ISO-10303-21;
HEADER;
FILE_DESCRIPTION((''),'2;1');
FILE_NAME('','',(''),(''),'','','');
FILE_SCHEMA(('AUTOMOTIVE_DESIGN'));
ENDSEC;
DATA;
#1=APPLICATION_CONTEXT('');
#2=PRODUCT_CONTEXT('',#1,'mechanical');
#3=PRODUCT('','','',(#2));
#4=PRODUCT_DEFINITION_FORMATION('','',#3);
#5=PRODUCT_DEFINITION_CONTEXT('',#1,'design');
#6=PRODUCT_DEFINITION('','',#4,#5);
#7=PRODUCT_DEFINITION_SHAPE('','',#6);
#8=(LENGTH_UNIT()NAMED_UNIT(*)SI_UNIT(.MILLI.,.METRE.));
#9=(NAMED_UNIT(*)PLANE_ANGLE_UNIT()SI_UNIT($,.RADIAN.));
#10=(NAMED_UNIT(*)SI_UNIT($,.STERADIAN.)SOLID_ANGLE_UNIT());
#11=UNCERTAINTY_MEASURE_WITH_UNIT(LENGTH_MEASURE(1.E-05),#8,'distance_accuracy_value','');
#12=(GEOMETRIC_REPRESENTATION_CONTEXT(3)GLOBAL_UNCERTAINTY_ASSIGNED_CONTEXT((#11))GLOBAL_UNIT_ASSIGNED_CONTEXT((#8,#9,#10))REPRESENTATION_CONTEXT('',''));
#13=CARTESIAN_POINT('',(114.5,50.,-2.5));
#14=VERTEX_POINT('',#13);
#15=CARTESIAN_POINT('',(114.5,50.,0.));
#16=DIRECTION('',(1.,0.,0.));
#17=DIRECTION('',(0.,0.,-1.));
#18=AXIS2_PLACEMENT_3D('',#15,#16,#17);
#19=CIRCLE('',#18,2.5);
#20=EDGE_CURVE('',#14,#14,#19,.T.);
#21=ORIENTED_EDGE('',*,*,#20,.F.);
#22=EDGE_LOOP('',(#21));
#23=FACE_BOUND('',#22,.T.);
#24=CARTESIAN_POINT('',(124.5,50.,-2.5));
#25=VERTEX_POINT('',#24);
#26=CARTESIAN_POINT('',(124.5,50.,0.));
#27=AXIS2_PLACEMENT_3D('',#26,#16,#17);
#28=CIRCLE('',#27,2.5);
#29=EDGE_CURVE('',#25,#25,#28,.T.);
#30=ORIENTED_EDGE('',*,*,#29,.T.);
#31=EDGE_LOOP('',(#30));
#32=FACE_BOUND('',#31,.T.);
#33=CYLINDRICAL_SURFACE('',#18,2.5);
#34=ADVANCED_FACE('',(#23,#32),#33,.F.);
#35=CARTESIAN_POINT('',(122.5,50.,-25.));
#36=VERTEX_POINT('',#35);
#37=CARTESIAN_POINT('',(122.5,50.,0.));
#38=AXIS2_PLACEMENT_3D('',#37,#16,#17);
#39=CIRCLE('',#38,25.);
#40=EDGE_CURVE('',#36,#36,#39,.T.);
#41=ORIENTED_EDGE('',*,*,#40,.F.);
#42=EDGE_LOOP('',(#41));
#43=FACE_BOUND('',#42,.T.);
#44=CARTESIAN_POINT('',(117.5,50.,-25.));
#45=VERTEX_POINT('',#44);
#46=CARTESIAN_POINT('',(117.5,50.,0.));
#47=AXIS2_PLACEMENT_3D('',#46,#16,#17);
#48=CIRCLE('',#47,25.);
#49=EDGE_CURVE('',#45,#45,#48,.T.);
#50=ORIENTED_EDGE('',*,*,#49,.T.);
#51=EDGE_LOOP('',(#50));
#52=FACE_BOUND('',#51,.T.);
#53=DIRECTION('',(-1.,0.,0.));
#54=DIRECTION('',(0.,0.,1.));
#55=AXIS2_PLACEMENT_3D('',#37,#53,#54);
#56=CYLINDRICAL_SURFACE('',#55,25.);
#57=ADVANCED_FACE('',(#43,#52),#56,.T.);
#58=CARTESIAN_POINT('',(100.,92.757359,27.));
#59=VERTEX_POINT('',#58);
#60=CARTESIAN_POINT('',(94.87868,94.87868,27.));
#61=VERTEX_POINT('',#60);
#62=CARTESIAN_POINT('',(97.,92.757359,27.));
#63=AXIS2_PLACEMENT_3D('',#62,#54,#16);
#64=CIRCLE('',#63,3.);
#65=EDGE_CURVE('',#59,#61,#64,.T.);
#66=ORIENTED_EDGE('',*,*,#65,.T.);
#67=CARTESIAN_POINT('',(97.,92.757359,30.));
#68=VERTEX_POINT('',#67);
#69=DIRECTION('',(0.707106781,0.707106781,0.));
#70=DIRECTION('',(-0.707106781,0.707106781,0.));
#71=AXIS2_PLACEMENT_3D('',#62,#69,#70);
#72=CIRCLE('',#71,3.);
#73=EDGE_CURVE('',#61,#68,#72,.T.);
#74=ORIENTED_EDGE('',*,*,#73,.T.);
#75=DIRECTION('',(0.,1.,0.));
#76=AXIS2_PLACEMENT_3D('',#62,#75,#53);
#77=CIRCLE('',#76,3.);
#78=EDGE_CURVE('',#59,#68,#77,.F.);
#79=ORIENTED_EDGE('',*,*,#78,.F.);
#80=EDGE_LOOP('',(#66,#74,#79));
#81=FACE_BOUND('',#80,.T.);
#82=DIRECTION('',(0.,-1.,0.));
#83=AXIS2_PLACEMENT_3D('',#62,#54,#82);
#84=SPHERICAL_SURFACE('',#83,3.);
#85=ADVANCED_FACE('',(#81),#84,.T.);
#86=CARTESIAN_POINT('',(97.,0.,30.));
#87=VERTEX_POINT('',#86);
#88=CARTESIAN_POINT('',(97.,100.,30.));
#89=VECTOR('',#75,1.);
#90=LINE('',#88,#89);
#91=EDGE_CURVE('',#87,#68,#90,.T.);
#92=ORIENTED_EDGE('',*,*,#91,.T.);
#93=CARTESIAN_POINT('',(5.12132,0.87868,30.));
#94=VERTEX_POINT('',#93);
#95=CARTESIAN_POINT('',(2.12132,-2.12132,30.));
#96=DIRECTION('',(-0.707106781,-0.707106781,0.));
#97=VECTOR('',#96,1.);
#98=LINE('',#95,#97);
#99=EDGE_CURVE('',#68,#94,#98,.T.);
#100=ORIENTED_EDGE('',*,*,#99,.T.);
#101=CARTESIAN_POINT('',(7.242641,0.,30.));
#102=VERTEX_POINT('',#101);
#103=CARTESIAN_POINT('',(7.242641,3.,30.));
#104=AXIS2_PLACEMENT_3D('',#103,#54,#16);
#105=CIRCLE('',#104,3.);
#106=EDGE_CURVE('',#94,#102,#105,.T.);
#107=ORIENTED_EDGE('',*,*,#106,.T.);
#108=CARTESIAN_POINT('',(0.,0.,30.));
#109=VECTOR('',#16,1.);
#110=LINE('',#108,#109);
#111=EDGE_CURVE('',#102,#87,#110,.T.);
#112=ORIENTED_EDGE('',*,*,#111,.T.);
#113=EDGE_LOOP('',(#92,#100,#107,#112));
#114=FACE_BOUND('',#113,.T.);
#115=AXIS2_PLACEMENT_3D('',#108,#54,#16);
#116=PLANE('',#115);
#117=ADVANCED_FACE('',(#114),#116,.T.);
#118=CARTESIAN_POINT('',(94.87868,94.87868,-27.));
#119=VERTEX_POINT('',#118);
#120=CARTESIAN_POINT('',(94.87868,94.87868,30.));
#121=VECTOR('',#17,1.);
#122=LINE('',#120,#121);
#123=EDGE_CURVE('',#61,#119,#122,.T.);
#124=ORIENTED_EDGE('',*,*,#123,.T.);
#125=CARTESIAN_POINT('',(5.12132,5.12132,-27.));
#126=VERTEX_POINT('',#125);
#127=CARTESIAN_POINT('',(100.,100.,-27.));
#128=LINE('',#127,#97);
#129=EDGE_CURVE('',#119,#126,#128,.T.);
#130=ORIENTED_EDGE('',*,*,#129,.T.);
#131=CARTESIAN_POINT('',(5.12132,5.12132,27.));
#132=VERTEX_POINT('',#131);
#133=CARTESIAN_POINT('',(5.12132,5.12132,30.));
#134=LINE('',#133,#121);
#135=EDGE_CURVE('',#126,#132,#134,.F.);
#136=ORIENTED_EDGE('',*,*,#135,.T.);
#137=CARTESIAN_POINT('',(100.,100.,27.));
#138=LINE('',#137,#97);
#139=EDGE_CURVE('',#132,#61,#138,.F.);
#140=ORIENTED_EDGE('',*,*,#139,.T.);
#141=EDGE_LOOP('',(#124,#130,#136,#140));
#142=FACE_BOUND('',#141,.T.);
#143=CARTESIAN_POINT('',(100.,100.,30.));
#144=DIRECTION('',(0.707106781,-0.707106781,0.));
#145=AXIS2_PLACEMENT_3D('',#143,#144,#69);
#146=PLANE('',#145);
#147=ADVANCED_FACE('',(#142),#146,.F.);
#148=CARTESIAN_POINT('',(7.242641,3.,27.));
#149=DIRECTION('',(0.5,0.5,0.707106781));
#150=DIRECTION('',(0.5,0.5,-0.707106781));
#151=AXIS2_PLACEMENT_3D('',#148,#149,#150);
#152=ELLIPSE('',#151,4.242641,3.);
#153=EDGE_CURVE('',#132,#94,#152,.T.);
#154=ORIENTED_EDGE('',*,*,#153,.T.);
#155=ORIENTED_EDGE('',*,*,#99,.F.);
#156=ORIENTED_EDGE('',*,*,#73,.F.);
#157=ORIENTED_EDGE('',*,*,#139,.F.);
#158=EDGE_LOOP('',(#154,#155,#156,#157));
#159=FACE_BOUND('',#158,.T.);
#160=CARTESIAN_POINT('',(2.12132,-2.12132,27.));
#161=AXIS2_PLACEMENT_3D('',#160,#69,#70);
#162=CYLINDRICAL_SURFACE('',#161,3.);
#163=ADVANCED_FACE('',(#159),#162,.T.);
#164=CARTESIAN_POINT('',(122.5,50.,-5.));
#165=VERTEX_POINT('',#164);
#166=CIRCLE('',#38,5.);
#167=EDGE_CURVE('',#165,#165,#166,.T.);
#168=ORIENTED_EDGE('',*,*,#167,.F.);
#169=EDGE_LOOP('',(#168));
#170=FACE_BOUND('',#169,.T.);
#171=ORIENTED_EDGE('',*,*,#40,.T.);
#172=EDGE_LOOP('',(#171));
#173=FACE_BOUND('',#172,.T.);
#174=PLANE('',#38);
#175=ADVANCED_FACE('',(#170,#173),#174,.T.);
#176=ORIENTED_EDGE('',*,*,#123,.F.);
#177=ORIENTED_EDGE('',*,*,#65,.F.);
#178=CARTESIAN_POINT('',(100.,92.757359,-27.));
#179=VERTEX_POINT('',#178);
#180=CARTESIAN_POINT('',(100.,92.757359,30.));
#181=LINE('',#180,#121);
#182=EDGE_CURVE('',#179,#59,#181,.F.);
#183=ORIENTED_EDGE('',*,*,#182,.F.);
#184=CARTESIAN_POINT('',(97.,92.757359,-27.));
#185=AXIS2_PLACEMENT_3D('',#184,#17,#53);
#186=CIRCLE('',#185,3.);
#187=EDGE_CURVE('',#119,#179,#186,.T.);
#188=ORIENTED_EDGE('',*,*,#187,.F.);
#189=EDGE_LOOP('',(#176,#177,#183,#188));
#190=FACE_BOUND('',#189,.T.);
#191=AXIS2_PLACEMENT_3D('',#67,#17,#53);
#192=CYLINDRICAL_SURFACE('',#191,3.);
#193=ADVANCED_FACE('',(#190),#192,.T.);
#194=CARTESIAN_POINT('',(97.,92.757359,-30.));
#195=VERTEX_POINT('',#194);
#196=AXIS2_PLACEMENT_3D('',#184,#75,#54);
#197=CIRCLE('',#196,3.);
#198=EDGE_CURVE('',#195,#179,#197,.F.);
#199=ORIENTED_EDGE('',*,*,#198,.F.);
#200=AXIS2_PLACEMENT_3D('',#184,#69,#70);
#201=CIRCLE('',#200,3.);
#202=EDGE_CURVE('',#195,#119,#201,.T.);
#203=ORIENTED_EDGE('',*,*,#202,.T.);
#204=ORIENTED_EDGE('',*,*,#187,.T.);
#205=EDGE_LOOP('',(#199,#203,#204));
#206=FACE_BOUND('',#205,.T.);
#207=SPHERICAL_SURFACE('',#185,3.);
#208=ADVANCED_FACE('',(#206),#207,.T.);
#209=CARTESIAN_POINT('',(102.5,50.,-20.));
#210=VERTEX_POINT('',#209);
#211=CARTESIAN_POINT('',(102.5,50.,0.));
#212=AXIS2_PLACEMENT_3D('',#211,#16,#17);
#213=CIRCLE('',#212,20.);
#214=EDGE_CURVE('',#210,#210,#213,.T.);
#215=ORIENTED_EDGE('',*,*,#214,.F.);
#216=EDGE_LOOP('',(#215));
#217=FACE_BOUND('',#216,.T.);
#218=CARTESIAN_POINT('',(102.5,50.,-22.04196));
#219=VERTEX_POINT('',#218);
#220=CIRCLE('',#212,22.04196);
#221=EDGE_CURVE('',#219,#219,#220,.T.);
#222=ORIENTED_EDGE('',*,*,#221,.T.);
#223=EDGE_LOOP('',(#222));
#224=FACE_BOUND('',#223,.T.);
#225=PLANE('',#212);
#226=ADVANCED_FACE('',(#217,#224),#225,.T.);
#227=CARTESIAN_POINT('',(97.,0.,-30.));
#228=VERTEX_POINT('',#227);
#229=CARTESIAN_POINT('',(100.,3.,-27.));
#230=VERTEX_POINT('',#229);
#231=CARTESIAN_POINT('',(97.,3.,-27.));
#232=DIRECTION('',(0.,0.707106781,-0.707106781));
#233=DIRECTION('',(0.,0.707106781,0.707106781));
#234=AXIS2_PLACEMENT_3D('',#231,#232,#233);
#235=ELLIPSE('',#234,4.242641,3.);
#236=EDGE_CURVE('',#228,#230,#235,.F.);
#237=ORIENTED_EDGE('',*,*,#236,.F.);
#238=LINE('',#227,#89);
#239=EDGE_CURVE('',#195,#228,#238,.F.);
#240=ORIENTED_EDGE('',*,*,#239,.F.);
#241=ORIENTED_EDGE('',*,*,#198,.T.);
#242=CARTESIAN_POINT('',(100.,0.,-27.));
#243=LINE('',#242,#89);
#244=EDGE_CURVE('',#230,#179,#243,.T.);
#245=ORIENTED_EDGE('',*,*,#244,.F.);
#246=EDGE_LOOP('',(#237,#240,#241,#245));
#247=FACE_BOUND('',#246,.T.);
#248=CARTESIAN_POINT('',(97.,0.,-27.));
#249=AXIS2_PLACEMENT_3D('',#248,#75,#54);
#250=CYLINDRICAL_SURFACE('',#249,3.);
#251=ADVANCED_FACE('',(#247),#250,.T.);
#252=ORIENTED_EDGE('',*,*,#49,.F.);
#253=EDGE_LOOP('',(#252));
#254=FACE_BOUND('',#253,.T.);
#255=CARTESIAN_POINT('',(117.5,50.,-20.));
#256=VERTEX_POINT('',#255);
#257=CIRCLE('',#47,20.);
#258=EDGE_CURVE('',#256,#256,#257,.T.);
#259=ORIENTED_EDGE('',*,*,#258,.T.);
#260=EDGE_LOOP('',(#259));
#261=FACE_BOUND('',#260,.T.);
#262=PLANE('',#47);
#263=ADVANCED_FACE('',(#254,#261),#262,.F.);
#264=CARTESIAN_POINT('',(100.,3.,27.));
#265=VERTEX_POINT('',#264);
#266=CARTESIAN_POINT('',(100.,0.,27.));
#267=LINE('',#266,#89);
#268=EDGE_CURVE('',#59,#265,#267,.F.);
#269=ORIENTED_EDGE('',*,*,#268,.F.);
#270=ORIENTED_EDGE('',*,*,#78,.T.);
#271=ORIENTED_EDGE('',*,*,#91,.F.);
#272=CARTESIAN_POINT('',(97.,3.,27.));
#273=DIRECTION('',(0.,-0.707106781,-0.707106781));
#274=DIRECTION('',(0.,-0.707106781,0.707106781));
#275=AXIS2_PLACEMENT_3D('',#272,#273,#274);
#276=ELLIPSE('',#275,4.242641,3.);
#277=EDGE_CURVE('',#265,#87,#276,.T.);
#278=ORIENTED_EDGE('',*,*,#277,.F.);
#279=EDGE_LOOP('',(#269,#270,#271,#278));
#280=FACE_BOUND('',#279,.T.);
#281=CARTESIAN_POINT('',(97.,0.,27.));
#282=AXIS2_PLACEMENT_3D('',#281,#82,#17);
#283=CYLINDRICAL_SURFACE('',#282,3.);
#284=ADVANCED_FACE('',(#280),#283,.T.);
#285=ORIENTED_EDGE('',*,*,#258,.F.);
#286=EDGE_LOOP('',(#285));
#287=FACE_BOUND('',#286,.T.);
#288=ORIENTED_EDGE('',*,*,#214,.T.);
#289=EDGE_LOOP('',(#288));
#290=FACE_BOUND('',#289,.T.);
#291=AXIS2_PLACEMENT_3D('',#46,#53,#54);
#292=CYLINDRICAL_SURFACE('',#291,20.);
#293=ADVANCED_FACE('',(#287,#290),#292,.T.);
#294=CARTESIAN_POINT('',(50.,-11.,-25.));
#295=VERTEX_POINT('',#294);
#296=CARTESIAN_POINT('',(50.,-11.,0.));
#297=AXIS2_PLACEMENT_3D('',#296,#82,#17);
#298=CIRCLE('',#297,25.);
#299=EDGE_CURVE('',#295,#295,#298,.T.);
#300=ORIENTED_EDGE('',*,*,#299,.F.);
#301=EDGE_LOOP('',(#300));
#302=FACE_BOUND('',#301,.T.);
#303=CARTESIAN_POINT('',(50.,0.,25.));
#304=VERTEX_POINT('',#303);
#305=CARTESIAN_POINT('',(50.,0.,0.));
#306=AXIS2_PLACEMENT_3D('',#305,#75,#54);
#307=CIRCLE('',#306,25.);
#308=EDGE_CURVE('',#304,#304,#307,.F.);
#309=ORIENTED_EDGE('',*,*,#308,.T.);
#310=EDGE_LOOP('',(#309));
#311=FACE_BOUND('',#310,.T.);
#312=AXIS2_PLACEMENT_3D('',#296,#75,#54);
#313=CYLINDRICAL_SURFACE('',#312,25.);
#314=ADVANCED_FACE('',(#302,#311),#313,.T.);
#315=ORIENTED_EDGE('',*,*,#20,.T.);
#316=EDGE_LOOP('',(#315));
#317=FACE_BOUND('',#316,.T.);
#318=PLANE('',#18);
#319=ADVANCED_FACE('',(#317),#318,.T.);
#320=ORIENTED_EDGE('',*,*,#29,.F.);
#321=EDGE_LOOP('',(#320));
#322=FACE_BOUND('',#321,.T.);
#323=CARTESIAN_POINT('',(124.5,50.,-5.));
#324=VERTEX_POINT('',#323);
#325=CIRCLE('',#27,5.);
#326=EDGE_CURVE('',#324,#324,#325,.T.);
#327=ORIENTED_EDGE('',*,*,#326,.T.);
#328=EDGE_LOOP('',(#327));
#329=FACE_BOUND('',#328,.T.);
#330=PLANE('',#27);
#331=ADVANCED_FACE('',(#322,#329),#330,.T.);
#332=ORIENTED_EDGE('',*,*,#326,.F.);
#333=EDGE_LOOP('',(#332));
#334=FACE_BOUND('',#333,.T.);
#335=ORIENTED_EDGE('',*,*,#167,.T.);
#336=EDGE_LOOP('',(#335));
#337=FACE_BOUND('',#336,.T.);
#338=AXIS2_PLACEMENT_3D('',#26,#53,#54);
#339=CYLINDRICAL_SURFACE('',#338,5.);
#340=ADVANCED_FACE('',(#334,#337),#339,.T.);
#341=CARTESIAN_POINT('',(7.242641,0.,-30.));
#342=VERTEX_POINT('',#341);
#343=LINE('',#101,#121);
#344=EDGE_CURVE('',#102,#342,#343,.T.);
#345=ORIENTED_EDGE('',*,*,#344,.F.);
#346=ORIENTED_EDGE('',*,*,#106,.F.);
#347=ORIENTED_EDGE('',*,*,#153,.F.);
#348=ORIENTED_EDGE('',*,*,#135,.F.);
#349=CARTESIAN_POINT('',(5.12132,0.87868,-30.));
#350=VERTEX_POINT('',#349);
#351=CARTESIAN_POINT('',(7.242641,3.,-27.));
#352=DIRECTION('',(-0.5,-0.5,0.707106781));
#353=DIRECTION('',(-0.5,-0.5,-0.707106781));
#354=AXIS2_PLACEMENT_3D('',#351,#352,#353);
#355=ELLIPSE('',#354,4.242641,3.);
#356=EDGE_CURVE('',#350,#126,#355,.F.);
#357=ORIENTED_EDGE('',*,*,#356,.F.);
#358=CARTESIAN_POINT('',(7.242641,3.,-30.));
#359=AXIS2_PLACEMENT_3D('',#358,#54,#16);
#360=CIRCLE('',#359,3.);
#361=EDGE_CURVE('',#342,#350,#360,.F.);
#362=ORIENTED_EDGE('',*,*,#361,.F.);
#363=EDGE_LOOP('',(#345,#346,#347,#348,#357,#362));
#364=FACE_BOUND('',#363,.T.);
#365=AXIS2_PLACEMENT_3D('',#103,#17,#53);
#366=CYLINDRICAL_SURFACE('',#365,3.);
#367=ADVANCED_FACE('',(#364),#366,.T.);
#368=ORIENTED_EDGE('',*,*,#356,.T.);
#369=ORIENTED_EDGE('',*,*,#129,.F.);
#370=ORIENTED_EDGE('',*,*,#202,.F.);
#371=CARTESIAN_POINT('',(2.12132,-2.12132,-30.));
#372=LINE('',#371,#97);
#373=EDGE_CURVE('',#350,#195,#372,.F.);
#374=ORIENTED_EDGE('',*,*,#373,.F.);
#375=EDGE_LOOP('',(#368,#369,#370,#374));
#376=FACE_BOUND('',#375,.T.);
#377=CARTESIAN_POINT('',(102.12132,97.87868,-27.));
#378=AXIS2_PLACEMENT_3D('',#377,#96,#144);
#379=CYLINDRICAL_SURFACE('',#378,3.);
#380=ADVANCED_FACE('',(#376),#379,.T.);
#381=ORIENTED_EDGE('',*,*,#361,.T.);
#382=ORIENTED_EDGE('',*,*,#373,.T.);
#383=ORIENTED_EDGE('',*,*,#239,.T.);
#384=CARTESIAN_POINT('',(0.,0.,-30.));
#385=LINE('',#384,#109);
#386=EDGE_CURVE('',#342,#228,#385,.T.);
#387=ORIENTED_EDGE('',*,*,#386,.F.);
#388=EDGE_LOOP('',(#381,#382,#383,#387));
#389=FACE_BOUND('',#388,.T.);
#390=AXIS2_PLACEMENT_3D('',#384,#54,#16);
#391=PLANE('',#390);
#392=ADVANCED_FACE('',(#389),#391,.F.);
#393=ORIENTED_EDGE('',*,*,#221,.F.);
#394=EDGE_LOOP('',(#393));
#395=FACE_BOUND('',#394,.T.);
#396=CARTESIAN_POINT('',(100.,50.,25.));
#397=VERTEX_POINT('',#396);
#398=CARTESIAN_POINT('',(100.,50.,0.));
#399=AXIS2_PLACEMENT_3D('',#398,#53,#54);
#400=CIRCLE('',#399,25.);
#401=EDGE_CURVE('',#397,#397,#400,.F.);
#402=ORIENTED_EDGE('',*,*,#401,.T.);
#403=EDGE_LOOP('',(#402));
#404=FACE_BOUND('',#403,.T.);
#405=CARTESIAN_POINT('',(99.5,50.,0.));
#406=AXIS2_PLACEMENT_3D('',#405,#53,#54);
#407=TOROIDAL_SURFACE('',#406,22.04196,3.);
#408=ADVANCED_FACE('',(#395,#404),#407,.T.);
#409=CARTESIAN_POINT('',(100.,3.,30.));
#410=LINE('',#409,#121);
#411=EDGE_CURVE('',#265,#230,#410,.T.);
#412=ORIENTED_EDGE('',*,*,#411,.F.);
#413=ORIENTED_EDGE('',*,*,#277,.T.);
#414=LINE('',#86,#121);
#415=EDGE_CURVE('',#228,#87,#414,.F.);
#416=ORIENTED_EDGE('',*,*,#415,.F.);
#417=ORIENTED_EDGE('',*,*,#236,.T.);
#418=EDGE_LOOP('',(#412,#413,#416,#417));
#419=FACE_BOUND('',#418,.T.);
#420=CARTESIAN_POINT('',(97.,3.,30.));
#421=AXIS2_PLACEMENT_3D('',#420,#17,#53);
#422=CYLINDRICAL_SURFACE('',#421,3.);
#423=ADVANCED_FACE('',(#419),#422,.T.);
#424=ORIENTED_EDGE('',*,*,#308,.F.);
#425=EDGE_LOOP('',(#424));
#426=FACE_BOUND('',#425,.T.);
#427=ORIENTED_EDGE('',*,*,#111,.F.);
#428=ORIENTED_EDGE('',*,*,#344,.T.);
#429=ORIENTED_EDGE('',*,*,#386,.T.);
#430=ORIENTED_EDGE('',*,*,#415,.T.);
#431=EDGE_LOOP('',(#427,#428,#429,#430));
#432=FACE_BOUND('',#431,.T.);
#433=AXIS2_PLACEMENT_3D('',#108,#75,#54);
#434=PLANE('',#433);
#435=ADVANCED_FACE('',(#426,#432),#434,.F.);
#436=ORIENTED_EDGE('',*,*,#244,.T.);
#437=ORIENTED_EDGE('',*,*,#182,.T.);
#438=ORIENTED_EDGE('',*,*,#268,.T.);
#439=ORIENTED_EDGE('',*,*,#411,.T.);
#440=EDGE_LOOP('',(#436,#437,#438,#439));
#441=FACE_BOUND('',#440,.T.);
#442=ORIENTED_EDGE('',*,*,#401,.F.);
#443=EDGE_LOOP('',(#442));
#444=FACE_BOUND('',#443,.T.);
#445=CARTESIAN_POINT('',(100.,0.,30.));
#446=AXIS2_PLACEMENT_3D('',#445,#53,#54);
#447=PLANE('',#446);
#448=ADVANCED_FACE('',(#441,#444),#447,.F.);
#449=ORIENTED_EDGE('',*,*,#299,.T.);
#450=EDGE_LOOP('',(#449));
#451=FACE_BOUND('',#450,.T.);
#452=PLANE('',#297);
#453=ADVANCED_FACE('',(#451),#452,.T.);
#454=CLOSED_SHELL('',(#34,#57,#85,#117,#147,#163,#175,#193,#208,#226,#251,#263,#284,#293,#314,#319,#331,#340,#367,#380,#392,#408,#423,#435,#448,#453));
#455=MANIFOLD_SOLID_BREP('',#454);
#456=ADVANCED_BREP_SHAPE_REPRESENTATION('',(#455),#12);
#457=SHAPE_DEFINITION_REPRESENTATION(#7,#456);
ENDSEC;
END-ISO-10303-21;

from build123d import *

# Parameters (mm, degrees)
BOSS_EXTRUDE1_DEPTH = 30
FILLET1_R           = 3
SKETCH2_R           = 25
BOSS_EXTRUDE2_DEPTH = 11
SKETCH3_R           = 25
BOSS_EXTRUDE3_DEPTH = 2.5
FILLET2_R           = 3
SKETCH5_R           = 20
BOSS_EXTRUDE4_DEPTH = 15
SKETCH6_R           = 25
BOSS_EXTRUDE5_DEPTH = 5
SKETCH7_R           = 5
BOSS_EXTRUDE6_DEPTH = 2
SKETCH8_R           = 2.5
CUT_EXTRUDE2_DEPTH  = 10


with BuildPart() as part:
    # Sketch1 → Boss-Extrude1 (new, symmetric)
    with BuildSketch(Plane.XY):
        Polygon((0, 0), (100, 0), (100, 100), align=None)
    extrude(amount=BOSS_EXTRUDE1_DEPTH, both=True)

    # Fillet1
    fillet1_edges = [part.edges().sort_by_distance(p)[0] for p in [
        (100, 50, 30),
        (100, 50, -30),
        (50, 50, -30),
        (50, 50, 30),
        (100, 100, 0),
        (100, 0, 0),
        (0, 0, 0),
    ]]
    fillet(fillet1_edges, radius=FILLET1_R)

    # Sketch2 → Boss-Extrude2 (add, symmetric)
    with BuildSketch(Plane.XZ):
        with Locations(Location((50, 0, 0), (0, 0, 90))):
            Circle(SKETCH2_R)
    extrude(amount=BOSS_EXTRUDE2_DEPTH, both=True)

    # Sketch3 → Boss-Extrude3 (add, symmetric)
    with BuildSketch(Plane(origin=(100, 0, 0), x_dir=(0, 0, -1), z_dir=(1, 0, 0))):
        with Locations(Location((0, 50, 0), (0, 0, 180))):
            Circle(SKETCH3_R)
    extrude(amount=BOSS_EXTRUDE3_DEPTH, both=True)

    # Fillet2
    # the kernel refuses this fillet: 3 mm, written as the material it takes off along each edge
    with BuildSketch(Plane(origin=(102.5, 50, 0), x_dir=(0, 0, 1), z_dir=(0, 1, 0))) as fillet2_piece_1:
        with BuildLine():
            CenterArc((22.041960108, -3), FILLET2_R, 9.594068227, 80.405931773)
            Line((22.041960108, 0), (22.041960108, 0.06))
            Line((22.041960108, 0.06), (25, 0.06))
            Line((25, 0.06), (25.06, 0))
            ThreePointArc((25.06, 0), (25.06, -1.25), (25.059160798, -2.49))
            Line((25.059160798, -2.49), (25, -2.5))
        make_face()
    revolve(axis=Axis((102.5, 50, 0), (1, 0, 0)), mode=Mode.SUBTRACT)

    # Sketch5 → Boss-Extrude4 (add)
    with BuildSketch(Plane(origin=(102.5, 0, 0), x_dir=(0, 0, -1), z_dir=(1, 0, 0))):
        with Locations((0, 50)):
            Circle(SKETCH5_R)
    extrude(amount=BOSS_EXTRUDE4_DEPTH)

    # Sketch6 → Boss-Extrude5 (add)
    with BuildSketch(Plane(origin=(117.5, 0, 0), x_dir=(0, 0, -1), z_dir=(1, 0, 0))):
        with Locations((0, 50)):
            Circle(SKETCH6_R)
    extrude(amount=BOSS_EXTRUDE5_DEPTH)

    # Sketch7 → Boss-Extrude6 (add)
    with BuildSketch(Plane(origin=(122.5, 0, 0), x_dir=(0, 0, -1), z_dir=(1, 0, 0))):
        with Locations((0, 50)):
            Circle(SKETCH7_R)
    extrude(amount=BOSS_EXTRUDE6_DEPTH)

    # Sketch8 → Cut-Extrude2 (cut)
    with BuildSketch(Plane(origin=(124.5, 0, 0), x_dir=(0, 0, -1), z_dir=(1, 0, 0))):
        with Locations((0, 50)):
            Circle(SKETCH8_R)
    extrude(amount=-CUT_EXTRUDE2_DEPTH, mode=Mode.SUBTRACT)


solid = part.part
